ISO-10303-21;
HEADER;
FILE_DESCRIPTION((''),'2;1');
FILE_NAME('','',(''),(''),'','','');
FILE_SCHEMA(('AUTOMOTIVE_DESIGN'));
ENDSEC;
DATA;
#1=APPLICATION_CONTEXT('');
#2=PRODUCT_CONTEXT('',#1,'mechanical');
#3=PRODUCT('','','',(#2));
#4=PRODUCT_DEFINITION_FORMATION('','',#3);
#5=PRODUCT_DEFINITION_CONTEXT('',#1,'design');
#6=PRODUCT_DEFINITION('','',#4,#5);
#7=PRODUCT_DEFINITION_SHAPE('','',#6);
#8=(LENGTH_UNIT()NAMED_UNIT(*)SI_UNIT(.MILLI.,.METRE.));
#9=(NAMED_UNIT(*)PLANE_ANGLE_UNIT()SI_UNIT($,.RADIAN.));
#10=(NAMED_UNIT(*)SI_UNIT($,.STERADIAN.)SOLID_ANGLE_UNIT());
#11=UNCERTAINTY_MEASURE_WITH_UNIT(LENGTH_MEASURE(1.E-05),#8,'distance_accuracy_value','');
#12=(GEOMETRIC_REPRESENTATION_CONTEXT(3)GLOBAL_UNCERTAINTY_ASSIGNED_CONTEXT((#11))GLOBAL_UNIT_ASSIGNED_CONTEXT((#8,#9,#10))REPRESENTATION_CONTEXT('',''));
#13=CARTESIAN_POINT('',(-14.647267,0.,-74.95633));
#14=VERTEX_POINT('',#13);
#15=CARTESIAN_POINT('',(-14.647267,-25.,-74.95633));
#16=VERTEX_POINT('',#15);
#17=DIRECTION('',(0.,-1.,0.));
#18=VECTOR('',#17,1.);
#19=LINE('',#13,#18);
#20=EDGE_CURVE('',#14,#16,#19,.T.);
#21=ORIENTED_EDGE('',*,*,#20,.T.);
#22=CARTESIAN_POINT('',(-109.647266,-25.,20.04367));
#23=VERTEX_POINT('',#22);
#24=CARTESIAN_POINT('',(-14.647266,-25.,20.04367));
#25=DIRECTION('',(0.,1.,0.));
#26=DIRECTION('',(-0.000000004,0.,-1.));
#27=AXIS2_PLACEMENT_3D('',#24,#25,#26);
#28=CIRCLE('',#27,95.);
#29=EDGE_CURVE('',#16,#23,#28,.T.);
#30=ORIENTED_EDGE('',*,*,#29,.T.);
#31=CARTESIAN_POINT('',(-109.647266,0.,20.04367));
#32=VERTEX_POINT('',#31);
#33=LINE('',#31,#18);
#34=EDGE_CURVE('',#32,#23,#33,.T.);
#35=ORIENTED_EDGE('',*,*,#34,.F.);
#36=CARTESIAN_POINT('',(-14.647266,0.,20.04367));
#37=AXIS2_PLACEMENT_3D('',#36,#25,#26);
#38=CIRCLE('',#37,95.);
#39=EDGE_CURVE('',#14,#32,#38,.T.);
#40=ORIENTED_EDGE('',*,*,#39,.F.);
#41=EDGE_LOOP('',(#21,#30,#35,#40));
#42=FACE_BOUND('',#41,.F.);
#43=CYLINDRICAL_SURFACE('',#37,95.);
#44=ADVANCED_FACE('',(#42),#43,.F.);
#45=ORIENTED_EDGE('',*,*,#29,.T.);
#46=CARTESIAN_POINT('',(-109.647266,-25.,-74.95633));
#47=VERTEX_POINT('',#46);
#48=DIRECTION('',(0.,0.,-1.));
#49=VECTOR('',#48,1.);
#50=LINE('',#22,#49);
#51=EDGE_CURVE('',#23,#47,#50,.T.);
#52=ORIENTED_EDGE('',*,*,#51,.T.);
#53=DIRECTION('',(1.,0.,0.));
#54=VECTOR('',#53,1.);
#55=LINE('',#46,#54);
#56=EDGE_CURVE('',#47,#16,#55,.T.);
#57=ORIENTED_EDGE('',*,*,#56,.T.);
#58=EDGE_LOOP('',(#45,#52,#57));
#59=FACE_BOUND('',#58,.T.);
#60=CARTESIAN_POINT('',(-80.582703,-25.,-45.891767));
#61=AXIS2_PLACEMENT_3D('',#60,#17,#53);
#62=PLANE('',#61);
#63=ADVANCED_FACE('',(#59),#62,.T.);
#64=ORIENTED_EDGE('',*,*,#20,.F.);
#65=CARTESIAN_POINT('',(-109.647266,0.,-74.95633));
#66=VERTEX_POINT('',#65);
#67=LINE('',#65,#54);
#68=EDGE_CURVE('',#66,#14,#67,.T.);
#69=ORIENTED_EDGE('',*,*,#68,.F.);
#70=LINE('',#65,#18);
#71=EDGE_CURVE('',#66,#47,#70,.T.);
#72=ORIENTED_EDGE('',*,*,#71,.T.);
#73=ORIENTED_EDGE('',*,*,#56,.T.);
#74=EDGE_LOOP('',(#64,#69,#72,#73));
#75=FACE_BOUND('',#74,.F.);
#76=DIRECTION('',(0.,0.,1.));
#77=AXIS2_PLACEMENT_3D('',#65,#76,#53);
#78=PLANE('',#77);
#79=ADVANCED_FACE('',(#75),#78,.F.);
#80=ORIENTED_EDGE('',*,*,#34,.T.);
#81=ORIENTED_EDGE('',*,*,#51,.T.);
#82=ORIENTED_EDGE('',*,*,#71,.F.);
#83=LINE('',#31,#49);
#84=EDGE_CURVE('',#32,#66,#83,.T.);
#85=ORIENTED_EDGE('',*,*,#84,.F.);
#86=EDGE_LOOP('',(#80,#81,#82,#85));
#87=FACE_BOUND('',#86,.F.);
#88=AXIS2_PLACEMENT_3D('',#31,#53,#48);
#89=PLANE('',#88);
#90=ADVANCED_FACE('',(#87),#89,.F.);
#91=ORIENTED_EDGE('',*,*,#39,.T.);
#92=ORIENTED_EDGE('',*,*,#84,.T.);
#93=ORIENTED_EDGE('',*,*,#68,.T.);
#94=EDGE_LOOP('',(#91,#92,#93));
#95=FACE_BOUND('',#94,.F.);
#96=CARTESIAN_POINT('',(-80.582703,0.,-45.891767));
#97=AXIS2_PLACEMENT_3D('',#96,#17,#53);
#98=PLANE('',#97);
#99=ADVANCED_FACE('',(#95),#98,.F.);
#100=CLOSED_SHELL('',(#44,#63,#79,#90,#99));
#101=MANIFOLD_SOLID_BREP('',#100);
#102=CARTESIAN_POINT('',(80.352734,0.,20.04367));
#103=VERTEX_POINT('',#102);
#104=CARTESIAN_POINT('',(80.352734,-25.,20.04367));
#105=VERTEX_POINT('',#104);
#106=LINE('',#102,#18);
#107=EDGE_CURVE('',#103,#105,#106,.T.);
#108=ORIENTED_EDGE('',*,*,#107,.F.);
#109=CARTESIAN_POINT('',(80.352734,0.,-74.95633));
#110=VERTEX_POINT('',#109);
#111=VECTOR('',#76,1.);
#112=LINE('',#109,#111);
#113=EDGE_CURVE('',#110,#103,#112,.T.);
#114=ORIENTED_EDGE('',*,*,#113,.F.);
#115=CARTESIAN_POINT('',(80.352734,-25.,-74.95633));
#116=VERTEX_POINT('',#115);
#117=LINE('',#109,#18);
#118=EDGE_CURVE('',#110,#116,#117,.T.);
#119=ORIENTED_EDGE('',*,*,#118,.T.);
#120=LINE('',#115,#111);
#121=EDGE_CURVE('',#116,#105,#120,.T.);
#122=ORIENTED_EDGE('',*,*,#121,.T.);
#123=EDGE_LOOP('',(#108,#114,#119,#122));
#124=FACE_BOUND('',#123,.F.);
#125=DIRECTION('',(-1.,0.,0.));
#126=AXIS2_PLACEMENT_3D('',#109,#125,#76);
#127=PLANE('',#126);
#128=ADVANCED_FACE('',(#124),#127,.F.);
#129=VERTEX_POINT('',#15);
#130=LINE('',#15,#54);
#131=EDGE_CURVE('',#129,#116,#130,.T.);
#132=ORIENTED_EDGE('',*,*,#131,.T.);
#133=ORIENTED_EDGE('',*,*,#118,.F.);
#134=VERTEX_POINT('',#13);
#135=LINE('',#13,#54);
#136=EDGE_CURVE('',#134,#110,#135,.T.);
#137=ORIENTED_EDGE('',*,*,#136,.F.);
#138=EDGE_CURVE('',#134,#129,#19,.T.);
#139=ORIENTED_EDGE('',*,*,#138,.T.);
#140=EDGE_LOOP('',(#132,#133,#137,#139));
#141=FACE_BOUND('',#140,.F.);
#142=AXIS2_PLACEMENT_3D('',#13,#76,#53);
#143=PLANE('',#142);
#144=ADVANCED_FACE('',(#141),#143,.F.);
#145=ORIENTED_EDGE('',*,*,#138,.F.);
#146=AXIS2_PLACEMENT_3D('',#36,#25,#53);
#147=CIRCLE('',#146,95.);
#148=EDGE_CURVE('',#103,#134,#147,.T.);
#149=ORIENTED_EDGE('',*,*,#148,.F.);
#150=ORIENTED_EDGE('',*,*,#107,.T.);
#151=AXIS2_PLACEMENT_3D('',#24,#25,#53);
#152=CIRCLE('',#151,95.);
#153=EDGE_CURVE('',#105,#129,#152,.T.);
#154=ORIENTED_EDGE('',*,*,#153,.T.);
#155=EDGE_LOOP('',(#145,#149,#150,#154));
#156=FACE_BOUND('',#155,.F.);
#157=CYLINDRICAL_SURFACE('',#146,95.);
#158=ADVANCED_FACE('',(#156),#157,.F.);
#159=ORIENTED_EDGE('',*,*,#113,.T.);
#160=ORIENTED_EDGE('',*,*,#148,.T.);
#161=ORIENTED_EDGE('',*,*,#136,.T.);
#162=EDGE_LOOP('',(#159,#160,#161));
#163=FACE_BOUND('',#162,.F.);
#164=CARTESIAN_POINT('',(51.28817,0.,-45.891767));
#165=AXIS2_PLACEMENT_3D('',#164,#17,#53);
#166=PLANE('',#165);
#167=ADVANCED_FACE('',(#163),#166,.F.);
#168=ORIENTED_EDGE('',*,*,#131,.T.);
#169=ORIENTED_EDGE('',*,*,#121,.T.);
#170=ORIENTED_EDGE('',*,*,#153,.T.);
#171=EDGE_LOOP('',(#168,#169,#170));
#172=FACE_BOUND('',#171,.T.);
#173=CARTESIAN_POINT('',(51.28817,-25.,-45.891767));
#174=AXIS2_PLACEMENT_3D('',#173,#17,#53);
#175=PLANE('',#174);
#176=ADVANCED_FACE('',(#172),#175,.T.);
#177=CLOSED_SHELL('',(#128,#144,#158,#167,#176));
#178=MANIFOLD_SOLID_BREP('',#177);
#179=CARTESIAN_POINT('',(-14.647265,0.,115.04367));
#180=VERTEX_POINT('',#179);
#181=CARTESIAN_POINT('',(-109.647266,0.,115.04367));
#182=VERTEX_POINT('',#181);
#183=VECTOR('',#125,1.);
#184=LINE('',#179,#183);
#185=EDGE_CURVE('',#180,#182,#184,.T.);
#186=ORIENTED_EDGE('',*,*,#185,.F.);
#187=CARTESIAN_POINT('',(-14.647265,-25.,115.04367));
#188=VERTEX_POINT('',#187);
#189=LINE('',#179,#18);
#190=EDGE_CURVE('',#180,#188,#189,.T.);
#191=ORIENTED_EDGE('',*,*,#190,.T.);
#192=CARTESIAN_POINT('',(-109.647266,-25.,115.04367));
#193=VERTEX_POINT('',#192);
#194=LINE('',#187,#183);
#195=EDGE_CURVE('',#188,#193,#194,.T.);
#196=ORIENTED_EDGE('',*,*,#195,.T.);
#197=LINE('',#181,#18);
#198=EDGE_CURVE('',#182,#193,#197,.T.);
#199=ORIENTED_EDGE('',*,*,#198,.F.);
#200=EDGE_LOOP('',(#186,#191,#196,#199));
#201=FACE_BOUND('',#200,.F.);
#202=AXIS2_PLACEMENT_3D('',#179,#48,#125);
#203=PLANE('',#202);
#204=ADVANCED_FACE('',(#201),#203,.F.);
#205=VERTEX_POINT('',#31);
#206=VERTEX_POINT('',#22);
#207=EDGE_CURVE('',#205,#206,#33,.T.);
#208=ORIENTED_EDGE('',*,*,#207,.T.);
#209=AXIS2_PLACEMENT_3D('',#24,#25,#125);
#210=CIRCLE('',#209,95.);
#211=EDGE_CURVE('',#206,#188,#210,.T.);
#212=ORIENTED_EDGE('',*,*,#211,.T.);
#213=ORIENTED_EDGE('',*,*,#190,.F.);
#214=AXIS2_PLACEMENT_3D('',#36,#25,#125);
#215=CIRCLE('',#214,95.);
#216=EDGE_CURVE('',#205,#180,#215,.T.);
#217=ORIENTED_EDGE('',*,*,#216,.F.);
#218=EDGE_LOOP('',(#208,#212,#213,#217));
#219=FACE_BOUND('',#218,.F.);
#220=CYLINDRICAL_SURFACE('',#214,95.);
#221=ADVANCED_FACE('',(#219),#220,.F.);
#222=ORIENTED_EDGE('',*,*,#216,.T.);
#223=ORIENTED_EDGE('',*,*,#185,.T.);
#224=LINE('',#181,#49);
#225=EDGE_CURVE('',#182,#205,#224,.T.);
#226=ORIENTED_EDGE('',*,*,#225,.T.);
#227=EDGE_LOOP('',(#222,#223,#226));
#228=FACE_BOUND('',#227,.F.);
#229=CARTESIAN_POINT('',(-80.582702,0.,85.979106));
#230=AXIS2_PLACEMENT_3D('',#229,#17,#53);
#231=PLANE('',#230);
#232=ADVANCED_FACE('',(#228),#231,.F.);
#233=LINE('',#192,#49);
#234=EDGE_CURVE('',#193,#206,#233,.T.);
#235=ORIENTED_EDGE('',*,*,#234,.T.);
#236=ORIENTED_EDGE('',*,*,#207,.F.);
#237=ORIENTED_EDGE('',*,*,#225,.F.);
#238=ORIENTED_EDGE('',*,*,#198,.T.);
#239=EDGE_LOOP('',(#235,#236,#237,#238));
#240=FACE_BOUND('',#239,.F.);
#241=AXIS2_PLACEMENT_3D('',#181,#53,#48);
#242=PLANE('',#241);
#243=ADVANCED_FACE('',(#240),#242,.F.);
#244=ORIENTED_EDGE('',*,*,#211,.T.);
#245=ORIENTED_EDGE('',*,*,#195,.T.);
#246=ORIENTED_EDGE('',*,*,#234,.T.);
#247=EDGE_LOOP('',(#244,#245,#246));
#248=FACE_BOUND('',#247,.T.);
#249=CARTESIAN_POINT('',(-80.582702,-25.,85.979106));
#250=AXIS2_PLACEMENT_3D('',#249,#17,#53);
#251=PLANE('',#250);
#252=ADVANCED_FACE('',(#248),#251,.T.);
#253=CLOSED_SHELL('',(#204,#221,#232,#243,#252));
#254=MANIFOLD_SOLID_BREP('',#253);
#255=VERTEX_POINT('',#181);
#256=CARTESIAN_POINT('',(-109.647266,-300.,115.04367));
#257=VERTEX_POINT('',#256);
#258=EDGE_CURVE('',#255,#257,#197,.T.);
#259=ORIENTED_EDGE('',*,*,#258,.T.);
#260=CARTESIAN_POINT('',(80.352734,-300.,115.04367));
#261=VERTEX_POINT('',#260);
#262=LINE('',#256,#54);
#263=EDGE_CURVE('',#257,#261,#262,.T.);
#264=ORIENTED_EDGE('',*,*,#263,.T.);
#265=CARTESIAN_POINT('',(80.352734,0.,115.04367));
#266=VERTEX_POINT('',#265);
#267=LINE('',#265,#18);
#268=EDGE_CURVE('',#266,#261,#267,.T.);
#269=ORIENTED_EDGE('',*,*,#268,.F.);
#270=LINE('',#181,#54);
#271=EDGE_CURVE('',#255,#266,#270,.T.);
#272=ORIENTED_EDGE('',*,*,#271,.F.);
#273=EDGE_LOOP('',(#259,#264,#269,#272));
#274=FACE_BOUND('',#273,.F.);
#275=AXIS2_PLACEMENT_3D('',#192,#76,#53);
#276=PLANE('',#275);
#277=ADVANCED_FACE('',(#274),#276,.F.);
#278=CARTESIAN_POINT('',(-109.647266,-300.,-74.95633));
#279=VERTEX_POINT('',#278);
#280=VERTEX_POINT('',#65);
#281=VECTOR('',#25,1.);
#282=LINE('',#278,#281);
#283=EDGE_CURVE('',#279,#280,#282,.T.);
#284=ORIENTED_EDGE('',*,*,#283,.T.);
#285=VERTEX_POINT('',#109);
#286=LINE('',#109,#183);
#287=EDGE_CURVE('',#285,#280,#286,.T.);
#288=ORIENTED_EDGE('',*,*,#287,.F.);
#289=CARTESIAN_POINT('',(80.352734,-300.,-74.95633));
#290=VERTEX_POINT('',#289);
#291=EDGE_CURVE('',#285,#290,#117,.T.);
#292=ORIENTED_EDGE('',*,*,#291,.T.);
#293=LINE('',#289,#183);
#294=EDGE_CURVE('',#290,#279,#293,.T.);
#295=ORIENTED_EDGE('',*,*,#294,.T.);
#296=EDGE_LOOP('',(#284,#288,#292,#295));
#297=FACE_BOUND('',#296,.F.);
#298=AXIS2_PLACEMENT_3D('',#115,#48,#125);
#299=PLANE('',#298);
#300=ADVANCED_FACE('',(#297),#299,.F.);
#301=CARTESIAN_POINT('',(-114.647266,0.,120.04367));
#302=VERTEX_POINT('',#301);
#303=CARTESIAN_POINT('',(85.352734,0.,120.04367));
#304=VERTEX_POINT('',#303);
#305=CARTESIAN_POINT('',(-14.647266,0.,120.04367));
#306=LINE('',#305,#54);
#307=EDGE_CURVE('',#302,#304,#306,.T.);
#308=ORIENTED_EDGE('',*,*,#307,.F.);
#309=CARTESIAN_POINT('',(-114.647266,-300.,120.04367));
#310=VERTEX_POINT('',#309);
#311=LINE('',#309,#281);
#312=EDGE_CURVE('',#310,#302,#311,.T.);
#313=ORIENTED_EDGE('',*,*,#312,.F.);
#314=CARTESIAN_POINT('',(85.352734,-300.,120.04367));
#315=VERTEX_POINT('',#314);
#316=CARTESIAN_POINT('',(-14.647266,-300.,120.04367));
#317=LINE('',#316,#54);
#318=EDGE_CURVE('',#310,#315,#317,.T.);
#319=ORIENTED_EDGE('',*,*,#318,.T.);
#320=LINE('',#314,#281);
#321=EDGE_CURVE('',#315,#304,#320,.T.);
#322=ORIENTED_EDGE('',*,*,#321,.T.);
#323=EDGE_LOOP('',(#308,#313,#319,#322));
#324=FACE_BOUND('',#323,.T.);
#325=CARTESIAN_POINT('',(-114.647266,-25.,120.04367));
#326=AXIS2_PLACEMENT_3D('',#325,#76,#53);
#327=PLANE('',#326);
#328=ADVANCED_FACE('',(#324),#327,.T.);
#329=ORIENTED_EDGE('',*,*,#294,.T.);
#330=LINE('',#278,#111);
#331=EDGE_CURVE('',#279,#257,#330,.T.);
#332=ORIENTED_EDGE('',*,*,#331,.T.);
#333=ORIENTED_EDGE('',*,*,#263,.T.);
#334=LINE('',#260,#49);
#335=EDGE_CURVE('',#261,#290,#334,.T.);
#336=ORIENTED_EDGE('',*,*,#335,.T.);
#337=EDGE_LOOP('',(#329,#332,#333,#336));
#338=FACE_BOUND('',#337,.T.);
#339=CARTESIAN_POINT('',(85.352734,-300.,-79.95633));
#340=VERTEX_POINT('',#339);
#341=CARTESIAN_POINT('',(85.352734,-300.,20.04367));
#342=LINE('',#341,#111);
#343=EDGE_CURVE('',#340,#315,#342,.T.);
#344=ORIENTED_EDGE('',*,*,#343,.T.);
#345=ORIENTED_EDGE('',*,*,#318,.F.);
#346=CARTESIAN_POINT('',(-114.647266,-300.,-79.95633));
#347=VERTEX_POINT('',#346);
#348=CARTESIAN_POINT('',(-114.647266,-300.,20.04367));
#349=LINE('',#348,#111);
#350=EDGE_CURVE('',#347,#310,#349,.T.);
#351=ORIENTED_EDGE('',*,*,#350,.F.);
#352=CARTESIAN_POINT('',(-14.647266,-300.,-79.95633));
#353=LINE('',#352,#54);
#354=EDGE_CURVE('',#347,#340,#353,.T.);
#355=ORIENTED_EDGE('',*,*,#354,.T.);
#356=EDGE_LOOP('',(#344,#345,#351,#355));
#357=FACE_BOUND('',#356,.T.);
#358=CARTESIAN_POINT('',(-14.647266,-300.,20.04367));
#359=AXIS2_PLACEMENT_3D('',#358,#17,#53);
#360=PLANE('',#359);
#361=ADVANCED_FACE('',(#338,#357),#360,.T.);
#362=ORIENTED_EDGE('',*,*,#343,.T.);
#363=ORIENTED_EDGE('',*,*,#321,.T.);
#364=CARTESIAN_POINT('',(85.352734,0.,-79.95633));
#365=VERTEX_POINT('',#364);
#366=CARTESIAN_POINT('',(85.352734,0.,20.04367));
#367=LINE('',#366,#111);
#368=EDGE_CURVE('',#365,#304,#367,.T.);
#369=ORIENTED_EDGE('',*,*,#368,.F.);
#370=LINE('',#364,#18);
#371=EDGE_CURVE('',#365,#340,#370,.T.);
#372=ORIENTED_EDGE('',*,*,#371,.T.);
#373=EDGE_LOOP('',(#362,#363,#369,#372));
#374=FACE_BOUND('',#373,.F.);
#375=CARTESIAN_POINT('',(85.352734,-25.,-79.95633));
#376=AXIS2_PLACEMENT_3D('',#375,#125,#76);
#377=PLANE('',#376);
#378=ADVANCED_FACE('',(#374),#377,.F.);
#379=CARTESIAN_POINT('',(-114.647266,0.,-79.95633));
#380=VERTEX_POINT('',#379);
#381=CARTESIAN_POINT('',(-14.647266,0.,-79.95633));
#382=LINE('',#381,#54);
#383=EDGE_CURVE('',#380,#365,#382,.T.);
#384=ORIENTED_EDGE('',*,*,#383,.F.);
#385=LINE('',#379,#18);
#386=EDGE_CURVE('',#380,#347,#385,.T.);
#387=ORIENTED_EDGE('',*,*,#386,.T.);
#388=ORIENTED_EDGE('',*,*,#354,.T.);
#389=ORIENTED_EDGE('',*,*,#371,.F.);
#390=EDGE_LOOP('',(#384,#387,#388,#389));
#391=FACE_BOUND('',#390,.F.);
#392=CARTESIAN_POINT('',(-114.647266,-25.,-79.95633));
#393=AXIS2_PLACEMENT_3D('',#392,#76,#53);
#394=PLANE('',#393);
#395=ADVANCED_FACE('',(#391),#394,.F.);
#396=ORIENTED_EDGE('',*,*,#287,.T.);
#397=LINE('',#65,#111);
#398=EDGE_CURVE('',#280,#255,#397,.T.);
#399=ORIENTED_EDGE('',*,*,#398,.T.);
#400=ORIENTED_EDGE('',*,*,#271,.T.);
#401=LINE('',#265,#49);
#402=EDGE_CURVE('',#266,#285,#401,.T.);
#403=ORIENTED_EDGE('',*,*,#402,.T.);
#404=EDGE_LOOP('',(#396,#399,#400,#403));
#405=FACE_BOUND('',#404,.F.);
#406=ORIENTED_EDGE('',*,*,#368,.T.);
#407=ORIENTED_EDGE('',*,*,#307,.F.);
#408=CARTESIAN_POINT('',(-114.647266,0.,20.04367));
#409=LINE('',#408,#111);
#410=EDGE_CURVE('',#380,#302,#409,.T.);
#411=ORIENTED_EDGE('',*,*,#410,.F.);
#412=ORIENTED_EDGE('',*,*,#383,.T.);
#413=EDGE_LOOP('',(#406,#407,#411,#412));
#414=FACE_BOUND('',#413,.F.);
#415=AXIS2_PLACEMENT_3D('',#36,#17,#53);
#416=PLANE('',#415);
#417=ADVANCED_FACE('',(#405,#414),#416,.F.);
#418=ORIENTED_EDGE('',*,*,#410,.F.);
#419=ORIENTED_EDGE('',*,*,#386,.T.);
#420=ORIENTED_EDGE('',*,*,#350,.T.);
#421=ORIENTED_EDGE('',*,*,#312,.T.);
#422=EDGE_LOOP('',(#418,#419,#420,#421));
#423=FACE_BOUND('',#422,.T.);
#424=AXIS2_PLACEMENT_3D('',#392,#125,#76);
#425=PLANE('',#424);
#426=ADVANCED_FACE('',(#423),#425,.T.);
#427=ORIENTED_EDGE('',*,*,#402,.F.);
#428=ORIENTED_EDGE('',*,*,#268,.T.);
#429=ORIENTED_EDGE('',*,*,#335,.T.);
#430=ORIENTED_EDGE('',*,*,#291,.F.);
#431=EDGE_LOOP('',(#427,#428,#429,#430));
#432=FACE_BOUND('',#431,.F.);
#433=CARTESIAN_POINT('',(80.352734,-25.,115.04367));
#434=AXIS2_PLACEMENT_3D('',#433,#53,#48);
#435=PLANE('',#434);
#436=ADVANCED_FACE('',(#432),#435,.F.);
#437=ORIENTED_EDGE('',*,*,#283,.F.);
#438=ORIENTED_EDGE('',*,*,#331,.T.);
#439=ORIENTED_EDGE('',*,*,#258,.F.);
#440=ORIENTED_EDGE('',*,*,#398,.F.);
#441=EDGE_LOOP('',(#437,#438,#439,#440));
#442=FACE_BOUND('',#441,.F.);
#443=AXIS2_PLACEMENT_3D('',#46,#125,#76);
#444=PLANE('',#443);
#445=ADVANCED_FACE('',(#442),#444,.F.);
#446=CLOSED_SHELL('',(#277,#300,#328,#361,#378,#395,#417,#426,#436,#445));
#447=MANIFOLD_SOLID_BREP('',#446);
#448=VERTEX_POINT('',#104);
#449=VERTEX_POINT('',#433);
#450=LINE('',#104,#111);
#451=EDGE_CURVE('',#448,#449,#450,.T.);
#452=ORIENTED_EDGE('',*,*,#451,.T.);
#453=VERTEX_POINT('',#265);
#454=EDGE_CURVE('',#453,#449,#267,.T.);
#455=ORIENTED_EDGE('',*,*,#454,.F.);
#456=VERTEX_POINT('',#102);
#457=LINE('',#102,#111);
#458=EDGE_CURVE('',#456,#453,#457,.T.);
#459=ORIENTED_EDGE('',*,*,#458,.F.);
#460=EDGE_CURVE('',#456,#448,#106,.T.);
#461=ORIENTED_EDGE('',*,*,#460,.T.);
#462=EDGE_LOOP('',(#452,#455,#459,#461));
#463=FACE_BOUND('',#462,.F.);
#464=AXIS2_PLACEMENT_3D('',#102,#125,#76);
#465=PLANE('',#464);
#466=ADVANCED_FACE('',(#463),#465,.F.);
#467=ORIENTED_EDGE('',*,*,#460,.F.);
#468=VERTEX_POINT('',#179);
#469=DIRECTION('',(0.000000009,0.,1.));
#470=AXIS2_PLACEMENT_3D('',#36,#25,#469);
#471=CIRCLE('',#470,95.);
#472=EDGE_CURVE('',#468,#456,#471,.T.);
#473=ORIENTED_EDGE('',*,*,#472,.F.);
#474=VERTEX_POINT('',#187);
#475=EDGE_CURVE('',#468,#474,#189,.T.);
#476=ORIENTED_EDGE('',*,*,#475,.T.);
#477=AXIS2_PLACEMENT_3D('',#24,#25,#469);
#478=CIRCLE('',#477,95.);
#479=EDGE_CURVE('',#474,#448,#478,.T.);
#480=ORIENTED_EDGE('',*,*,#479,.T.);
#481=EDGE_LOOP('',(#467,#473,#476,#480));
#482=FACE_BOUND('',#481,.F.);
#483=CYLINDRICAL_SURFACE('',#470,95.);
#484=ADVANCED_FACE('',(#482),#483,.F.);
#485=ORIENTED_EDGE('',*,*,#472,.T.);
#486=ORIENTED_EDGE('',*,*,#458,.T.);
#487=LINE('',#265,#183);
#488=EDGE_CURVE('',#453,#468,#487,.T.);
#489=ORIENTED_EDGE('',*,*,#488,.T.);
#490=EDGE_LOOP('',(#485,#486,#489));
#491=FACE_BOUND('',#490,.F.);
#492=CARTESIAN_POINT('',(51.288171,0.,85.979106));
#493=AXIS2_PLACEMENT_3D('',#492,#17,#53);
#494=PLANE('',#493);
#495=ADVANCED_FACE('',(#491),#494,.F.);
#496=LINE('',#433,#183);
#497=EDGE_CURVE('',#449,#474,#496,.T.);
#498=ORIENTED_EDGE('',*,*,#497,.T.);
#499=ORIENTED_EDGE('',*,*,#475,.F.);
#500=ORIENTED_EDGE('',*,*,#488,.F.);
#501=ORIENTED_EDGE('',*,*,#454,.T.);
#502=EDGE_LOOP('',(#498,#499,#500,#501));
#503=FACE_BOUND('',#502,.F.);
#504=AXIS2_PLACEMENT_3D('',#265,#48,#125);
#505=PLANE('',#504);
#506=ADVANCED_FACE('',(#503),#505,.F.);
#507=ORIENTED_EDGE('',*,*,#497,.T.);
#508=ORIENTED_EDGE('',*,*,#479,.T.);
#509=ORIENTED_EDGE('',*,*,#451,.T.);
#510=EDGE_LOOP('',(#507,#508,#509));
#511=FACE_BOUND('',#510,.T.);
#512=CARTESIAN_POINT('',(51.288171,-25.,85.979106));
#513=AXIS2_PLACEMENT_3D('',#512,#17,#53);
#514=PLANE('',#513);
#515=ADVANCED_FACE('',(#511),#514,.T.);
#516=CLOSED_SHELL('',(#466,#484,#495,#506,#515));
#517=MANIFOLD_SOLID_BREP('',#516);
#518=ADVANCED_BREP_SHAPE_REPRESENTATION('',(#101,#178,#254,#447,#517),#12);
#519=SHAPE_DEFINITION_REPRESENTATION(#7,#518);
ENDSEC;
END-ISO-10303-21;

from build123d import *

# Parameters (mm, degrees)
F1_DEPTH = 25
F0_W     = 200
F0_H     = 200
F2_DEPTH = 25
F3_DEPTH = 275


with BuildPart() as f1:
    # F0 (on Front) → F1 (new body)
    with BuildSketch(Plane.XZ):
        with BuildLine():
            Line((80.3527337313, 115.043669641), (-14.6472653884, 115.043669641))
            ThreePointArc((-14.6472653884, 115.043669641), (52.5278782552, 87.2188135425), (80.3527337313, 20.043669641))
            Line((80.3527337313, 20.043669641), (80.3527337313, 115.043669641))
        make_face()
    extrude(amount=F1_DEPTH)


with BuildPart() as f1b:
    # F0 (on Front) → F1, piece 2 (new body)
    with BuildSketch(Plane.XZ):
        with BuildLine():
            Line((-14.6472653884, 115.043669641), (-109.6472662687, 115.043669641))
            Line((-109.6472662687, 115.043669641), (-109.6472662687, 20.0436696216))
            ThreePointArc((-109.6472662687, 20.0436696216), (-81.8224101771, 87.2188141581), (-14.6472653884, 115.043669641))
        make_face()
    extrude(amount=F1_DEPTH)


with BuildPart() as f1c:
    # F0 (on Front) → F1, piece 3 (new body)
    with BuildSketch(Plane.XZ):
        with BuildLine():
            ThreePointArc((-14.6472666457, -74.956330359), (-81.8224106079, -47.1314744453), (-109.6472662687, 20.0436696216))
            Line((-109.6472662687, 20.0436696216), (-109.6472662687, -74.956330359))
            Line((-109.6472662687, -74.956330359), (-14.6472666457, -74.956330359))
        make_face()
    extrude(amount=F1_DEPTH)


with BuildPart() as f1d:
    # F0 (on Front) → F1, piece 4 (new body)
    with BuildSketch(Plane.XZ):
        with BuildLine():
            Line((80.3527337313, -74.956330359), (80.3527337313, 20.043669641))
            ThreePointArc((80.3527337313, 20.043669641), (52.5278778107, -47.131474705), (-14.6472666457, -74.956330359))
            Line((-14.6472666457, -74.956330359), (80.3527337313, -74.956330359))
        make_face()
    extrude(amount=F1_DEPTH)


with BuildPart() as f2:
    # F0 (on Front) → F2 (new body)
    with BuildSketch(Plane.XZ):
        with Locations((-14.6472662687, 20.043669641)):
            Rectangle(F0_W, F0_H)
        Polygon((-109.6472662687, 20.0436696216), (-109.6472662687, 115.043669641), (-14.6472653884, 115.043669641), (80.3527337313, 115.043669641), (80.3527337313, 20.043669641), (80.3527337313, -74.956330359), (-14.6472666457, -74.956330359), (-109.6472662687, -74.956330359), align=None, mode=Mode.SUBTRACT)
    extrude(amount=F2_DEPTH)

    # F3 (add): a face of the model
    f3_faces = [f2.faces().sort_by_distance(p)[0] for p in [
        (-14.6472662687, -25, 117.2152425163),
    ]]
    extrude(f3_faces, amount=F3_DEPTH)


solid = Compound([f1.part, f1b.part, f1c.part, f1d.part, f2.part])
